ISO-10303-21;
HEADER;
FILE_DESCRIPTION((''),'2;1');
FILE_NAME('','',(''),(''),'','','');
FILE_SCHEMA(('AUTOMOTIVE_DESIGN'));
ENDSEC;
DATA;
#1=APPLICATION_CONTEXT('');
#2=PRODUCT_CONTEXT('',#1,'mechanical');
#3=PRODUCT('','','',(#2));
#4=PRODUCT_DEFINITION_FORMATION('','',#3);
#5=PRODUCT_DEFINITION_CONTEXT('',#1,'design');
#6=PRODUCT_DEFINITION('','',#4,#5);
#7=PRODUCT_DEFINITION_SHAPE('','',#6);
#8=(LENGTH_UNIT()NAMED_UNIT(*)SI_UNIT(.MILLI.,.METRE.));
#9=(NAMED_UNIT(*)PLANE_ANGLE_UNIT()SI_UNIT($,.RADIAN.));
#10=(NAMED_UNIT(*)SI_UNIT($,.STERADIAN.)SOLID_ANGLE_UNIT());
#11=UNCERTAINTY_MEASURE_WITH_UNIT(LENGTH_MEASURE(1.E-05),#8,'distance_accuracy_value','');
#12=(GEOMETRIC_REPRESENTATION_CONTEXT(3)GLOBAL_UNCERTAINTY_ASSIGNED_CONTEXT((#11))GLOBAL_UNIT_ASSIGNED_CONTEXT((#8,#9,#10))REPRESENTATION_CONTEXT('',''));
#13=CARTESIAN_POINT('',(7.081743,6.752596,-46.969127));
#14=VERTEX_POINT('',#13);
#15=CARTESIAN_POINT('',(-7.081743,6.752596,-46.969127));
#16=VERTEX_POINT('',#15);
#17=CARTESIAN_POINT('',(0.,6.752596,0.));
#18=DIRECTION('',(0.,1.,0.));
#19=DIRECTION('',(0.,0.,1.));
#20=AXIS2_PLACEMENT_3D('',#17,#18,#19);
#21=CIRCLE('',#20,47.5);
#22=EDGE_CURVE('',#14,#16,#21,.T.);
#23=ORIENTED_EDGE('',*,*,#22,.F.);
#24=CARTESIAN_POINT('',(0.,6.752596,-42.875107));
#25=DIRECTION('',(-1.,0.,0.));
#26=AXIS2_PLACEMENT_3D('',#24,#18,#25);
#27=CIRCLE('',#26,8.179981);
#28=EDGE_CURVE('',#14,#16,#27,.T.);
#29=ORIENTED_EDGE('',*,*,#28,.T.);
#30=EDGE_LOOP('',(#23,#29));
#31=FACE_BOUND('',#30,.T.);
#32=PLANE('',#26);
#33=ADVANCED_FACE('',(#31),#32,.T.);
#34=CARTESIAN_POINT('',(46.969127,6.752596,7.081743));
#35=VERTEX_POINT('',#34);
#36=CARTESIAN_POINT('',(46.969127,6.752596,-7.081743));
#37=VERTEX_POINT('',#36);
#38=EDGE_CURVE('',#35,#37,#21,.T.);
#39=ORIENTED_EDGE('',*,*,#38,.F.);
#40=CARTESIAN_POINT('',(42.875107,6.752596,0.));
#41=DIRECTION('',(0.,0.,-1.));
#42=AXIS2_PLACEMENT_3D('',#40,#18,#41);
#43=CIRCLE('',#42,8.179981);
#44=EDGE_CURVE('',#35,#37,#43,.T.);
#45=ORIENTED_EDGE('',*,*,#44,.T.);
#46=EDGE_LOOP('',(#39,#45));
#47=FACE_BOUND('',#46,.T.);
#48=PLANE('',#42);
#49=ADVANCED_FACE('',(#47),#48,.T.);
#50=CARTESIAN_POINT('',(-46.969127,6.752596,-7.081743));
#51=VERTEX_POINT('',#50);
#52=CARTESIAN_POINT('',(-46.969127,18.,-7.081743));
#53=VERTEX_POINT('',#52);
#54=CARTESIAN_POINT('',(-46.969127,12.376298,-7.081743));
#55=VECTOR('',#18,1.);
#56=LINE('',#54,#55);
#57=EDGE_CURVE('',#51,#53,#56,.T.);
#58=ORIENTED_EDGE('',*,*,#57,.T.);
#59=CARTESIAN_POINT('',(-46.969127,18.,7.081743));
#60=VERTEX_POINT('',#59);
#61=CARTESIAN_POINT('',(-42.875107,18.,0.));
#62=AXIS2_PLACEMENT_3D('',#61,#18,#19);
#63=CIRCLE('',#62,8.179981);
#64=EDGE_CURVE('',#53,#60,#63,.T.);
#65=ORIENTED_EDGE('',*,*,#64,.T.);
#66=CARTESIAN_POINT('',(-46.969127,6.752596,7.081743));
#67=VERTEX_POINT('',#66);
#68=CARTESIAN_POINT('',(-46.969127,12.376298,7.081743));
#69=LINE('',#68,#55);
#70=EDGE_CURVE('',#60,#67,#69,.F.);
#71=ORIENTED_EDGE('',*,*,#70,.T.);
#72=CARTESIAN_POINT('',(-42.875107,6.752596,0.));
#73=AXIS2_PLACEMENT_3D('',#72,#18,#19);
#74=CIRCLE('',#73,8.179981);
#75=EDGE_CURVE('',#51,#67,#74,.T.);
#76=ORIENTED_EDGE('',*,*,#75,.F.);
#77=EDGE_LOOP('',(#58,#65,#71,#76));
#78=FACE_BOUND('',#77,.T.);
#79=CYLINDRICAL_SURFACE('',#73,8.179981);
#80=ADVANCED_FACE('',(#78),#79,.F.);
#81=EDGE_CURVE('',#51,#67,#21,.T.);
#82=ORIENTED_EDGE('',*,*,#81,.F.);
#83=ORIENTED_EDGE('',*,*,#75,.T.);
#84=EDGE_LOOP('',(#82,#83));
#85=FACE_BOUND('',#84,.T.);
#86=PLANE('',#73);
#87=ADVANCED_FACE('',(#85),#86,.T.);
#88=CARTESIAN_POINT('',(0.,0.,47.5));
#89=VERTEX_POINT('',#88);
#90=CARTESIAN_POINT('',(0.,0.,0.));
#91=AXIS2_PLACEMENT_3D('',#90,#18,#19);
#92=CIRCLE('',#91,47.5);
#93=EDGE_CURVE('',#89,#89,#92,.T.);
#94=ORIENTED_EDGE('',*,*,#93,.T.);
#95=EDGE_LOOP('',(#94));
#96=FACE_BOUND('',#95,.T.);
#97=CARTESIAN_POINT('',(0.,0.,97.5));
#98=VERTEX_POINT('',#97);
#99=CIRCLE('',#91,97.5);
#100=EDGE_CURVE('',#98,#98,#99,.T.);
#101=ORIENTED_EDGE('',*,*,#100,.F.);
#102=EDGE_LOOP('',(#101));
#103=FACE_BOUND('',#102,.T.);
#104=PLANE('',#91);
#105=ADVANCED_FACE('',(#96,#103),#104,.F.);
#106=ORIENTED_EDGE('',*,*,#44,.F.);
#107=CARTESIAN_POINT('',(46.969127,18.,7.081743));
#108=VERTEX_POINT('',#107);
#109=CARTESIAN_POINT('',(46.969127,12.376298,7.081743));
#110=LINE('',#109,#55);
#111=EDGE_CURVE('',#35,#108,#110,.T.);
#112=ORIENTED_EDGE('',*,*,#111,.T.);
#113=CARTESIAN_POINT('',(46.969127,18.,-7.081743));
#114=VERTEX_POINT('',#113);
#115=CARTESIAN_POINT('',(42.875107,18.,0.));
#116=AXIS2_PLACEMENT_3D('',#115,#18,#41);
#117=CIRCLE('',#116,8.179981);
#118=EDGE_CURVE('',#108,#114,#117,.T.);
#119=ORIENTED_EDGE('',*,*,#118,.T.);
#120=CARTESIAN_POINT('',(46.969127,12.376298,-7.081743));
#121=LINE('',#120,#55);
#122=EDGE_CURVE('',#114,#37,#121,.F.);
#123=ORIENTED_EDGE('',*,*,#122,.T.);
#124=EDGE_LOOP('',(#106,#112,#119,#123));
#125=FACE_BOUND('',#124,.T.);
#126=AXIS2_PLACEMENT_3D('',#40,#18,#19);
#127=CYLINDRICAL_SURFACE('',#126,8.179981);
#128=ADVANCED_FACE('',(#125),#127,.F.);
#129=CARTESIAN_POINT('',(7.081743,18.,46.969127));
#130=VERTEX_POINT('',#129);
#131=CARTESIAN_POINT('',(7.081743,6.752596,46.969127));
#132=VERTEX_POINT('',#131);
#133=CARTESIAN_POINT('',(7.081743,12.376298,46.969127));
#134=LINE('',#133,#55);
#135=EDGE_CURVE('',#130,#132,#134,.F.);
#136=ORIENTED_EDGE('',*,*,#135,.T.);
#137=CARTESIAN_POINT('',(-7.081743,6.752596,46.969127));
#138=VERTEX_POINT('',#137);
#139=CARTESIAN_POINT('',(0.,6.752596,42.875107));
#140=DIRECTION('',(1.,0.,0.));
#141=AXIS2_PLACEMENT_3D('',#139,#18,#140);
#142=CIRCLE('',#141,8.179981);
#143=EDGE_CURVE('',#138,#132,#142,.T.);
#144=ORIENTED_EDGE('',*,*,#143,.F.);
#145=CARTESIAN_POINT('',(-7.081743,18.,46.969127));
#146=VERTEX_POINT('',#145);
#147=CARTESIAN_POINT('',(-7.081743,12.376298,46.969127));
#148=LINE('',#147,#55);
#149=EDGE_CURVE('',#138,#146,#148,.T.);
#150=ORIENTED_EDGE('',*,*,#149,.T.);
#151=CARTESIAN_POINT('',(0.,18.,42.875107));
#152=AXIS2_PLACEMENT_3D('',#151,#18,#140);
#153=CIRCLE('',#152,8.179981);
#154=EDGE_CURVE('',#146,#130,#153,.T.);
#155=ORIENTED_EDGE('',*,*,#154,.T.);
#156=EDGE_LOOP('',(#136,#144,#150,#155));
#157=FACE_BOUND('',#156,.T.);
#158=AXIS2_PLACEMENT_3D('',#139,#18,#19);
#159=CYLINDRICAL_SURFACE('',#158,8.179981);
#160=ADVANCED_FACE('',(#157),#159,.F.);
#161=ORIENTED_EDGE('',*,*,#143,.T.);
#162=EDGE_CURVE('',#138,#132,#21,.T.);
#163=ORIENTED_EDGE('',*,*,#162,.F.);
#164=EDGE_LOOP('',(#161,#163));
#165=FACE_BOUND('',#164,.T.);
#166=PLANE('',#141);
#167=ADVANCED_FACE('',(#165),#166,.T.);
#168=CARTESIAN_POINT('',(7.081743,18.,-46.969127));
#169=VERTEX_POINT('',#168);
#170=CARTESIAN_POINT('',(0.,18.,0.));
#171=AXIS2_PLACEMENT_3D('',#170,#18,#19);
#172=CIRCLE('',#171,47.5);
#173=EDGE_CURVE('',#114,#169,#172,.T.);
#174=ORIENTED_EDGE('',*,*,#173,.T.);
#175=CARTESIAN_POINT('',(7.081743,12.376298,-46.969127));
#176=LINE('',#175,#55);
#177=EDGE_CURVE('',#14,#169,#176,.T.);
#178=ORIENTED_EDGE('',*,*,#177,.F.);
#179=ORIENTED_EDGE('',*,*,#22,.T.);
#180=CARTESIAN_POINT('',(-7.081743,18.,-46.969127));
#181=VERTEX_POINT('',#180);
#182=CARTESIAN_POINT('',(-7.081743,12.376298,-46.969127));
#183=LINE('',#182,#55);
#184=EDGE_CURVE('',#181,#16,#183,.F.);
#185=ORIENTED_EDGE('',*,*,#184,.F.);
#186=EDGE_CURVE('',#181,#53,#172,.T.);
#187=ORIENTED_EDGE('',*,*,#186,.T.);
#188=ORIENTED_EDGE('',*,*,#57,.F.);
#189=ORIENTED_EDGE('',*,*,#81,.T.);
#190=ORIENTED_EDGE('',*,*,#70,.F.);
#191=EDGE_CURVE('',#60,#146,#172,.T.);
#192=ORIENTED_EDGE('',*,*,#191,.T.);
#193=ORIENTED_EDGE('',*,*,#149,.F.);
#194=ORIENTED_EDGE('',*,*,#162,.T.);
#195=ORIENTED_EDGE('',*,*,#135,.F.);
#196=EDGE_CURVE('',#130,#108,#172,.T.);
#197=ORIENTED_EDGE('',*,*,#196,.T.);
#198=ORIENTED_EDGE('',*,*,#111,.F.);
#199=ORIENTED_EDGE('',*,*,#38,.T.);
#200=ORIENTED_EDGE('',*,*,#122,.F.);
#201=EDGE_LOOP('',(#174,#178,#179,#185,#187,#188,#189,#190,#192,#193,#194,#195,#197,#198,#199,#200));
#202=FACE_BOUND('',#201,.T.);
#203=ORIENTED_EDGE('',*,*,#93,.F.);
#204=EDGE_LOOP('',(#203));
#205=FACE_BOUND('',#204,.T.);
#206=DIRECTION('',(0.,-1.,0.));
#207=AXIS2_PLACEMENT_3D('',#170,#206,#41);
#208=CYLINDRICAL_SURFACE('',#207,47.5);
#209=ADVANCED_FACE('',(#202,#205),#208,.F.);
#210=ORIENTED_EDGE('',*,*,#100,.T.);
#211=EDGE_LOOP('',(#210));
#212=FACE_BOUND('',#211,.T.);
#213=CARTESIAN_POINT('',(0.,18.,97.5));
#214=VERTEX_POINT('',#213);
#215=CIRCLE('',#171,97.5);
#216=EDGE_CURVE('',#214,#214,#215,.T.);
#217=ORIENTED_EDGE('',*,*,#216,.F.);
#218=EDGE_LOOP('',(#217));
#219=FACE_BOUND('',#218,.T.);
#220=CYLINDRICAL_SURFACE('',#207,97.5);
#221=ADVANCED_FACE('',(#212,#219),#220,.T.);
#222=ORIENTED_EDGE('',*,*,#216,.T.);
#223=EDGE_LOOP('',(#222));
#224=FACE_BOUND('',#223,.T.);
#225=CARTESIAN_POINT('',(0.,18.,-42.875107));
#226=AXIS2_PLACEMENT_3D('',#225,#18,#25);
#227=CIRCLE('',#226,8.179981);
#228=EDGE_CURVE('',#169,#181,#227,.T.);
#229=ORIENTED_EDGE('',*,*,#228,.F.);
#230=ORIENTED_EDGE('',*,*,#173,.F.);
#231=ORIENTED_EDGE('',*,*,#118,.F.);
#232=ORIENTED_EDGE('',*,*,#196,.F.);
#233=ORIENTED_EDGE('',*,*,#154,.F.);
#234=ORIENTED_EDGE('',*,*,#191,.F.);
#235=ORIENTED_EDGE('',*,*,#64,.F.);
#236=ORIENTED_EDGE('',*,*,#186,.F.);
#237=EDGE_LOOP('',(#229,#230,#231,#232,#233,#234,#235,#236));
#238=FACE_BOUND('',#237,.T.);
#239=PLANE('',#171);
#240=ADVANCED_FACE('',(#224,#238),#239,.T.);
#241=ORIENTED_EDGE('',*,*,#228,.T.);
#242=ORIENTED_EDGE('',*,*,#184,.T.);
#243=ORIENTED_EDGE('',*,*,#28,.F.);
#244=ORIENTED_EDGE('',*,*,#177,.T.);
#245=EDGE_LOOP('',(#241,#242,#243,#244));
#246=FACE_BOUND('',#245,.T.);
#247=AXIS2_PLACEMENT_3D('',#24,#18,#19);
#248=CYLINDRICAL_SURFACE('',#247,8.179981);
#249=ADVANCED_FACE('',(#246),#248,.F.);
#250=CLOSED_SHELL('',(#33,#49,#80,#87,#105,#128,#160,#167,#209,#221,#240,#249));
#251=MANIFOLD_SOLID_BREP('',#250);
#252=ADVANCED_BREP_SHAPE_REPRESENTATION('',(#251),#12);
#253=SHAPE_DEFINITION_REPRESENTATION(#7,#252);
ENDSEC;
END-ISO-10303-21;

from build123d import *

# Parameters (mm, degrees)
SKETCH1_R           = 97.5
BOSS_EXTRUDE1_DEPTH = 18
SKETCH2_R           = 47.5
CUT_EXTRUDE1_DEPTH  = 140.055744218
SKETCH3_R           = 8.179980897
CUT_EXTRUDE2_DEPTH  = 11.247404448
CIRPATTERN1_COUNT   = 4


with BuildPart() as part:
    # Sketch1 → Boss-Extrude1 (new body)
    with BuildSketch(Plane(origin=(0, 0, 0), x_dir=(1, 0, 0), z_dir=(0, 1, 0))):
        Circle(SKETCH1_R)
    extrude(amount=BOSS_EXTRUDE1_DEPTH)

    # Sketch2 → Cut-Extrude1 (cut, through all)
    with BuildSketch(Plane(origin=(0, 0, 0), x_dir=(1, 0, 0), z_dir=(0, 1, 0))):
        Circle(SKETCH2_R)
    extrude(amount=CUT_EXTRUDE1_DEPTH, mode=Mode.SUBTRACT)

    # Sketch3 → Cut-Extrude2 (cut)
    with BuildSketch(Plane(origin=(0, 18, 0), x_dir=(1, 0, 0), z_dir=(0, 1, 0))):
        with Locations((-42.875106752, 0)):
            Circle(SKETCH3_R)
    cut_extrude2 = extrude(amount=-CUT_EXTRUDE2_DEPTH, mode=Mode.SUBTRACT)

    # CirPattern1: Cut-Extrude2 ×4 about axis
    cirpattern1_axis = Axis((0, 0, 0), (0, 1, 0))
    for i in range(1, CIRPATTERN1_COUNT):
        add(cut_extrude2.rotate(cirpattern1_axis, i * 360 / CIRPATTERN1_COUNT), mode=Mode.SUBTRACT)


solid = part.part
